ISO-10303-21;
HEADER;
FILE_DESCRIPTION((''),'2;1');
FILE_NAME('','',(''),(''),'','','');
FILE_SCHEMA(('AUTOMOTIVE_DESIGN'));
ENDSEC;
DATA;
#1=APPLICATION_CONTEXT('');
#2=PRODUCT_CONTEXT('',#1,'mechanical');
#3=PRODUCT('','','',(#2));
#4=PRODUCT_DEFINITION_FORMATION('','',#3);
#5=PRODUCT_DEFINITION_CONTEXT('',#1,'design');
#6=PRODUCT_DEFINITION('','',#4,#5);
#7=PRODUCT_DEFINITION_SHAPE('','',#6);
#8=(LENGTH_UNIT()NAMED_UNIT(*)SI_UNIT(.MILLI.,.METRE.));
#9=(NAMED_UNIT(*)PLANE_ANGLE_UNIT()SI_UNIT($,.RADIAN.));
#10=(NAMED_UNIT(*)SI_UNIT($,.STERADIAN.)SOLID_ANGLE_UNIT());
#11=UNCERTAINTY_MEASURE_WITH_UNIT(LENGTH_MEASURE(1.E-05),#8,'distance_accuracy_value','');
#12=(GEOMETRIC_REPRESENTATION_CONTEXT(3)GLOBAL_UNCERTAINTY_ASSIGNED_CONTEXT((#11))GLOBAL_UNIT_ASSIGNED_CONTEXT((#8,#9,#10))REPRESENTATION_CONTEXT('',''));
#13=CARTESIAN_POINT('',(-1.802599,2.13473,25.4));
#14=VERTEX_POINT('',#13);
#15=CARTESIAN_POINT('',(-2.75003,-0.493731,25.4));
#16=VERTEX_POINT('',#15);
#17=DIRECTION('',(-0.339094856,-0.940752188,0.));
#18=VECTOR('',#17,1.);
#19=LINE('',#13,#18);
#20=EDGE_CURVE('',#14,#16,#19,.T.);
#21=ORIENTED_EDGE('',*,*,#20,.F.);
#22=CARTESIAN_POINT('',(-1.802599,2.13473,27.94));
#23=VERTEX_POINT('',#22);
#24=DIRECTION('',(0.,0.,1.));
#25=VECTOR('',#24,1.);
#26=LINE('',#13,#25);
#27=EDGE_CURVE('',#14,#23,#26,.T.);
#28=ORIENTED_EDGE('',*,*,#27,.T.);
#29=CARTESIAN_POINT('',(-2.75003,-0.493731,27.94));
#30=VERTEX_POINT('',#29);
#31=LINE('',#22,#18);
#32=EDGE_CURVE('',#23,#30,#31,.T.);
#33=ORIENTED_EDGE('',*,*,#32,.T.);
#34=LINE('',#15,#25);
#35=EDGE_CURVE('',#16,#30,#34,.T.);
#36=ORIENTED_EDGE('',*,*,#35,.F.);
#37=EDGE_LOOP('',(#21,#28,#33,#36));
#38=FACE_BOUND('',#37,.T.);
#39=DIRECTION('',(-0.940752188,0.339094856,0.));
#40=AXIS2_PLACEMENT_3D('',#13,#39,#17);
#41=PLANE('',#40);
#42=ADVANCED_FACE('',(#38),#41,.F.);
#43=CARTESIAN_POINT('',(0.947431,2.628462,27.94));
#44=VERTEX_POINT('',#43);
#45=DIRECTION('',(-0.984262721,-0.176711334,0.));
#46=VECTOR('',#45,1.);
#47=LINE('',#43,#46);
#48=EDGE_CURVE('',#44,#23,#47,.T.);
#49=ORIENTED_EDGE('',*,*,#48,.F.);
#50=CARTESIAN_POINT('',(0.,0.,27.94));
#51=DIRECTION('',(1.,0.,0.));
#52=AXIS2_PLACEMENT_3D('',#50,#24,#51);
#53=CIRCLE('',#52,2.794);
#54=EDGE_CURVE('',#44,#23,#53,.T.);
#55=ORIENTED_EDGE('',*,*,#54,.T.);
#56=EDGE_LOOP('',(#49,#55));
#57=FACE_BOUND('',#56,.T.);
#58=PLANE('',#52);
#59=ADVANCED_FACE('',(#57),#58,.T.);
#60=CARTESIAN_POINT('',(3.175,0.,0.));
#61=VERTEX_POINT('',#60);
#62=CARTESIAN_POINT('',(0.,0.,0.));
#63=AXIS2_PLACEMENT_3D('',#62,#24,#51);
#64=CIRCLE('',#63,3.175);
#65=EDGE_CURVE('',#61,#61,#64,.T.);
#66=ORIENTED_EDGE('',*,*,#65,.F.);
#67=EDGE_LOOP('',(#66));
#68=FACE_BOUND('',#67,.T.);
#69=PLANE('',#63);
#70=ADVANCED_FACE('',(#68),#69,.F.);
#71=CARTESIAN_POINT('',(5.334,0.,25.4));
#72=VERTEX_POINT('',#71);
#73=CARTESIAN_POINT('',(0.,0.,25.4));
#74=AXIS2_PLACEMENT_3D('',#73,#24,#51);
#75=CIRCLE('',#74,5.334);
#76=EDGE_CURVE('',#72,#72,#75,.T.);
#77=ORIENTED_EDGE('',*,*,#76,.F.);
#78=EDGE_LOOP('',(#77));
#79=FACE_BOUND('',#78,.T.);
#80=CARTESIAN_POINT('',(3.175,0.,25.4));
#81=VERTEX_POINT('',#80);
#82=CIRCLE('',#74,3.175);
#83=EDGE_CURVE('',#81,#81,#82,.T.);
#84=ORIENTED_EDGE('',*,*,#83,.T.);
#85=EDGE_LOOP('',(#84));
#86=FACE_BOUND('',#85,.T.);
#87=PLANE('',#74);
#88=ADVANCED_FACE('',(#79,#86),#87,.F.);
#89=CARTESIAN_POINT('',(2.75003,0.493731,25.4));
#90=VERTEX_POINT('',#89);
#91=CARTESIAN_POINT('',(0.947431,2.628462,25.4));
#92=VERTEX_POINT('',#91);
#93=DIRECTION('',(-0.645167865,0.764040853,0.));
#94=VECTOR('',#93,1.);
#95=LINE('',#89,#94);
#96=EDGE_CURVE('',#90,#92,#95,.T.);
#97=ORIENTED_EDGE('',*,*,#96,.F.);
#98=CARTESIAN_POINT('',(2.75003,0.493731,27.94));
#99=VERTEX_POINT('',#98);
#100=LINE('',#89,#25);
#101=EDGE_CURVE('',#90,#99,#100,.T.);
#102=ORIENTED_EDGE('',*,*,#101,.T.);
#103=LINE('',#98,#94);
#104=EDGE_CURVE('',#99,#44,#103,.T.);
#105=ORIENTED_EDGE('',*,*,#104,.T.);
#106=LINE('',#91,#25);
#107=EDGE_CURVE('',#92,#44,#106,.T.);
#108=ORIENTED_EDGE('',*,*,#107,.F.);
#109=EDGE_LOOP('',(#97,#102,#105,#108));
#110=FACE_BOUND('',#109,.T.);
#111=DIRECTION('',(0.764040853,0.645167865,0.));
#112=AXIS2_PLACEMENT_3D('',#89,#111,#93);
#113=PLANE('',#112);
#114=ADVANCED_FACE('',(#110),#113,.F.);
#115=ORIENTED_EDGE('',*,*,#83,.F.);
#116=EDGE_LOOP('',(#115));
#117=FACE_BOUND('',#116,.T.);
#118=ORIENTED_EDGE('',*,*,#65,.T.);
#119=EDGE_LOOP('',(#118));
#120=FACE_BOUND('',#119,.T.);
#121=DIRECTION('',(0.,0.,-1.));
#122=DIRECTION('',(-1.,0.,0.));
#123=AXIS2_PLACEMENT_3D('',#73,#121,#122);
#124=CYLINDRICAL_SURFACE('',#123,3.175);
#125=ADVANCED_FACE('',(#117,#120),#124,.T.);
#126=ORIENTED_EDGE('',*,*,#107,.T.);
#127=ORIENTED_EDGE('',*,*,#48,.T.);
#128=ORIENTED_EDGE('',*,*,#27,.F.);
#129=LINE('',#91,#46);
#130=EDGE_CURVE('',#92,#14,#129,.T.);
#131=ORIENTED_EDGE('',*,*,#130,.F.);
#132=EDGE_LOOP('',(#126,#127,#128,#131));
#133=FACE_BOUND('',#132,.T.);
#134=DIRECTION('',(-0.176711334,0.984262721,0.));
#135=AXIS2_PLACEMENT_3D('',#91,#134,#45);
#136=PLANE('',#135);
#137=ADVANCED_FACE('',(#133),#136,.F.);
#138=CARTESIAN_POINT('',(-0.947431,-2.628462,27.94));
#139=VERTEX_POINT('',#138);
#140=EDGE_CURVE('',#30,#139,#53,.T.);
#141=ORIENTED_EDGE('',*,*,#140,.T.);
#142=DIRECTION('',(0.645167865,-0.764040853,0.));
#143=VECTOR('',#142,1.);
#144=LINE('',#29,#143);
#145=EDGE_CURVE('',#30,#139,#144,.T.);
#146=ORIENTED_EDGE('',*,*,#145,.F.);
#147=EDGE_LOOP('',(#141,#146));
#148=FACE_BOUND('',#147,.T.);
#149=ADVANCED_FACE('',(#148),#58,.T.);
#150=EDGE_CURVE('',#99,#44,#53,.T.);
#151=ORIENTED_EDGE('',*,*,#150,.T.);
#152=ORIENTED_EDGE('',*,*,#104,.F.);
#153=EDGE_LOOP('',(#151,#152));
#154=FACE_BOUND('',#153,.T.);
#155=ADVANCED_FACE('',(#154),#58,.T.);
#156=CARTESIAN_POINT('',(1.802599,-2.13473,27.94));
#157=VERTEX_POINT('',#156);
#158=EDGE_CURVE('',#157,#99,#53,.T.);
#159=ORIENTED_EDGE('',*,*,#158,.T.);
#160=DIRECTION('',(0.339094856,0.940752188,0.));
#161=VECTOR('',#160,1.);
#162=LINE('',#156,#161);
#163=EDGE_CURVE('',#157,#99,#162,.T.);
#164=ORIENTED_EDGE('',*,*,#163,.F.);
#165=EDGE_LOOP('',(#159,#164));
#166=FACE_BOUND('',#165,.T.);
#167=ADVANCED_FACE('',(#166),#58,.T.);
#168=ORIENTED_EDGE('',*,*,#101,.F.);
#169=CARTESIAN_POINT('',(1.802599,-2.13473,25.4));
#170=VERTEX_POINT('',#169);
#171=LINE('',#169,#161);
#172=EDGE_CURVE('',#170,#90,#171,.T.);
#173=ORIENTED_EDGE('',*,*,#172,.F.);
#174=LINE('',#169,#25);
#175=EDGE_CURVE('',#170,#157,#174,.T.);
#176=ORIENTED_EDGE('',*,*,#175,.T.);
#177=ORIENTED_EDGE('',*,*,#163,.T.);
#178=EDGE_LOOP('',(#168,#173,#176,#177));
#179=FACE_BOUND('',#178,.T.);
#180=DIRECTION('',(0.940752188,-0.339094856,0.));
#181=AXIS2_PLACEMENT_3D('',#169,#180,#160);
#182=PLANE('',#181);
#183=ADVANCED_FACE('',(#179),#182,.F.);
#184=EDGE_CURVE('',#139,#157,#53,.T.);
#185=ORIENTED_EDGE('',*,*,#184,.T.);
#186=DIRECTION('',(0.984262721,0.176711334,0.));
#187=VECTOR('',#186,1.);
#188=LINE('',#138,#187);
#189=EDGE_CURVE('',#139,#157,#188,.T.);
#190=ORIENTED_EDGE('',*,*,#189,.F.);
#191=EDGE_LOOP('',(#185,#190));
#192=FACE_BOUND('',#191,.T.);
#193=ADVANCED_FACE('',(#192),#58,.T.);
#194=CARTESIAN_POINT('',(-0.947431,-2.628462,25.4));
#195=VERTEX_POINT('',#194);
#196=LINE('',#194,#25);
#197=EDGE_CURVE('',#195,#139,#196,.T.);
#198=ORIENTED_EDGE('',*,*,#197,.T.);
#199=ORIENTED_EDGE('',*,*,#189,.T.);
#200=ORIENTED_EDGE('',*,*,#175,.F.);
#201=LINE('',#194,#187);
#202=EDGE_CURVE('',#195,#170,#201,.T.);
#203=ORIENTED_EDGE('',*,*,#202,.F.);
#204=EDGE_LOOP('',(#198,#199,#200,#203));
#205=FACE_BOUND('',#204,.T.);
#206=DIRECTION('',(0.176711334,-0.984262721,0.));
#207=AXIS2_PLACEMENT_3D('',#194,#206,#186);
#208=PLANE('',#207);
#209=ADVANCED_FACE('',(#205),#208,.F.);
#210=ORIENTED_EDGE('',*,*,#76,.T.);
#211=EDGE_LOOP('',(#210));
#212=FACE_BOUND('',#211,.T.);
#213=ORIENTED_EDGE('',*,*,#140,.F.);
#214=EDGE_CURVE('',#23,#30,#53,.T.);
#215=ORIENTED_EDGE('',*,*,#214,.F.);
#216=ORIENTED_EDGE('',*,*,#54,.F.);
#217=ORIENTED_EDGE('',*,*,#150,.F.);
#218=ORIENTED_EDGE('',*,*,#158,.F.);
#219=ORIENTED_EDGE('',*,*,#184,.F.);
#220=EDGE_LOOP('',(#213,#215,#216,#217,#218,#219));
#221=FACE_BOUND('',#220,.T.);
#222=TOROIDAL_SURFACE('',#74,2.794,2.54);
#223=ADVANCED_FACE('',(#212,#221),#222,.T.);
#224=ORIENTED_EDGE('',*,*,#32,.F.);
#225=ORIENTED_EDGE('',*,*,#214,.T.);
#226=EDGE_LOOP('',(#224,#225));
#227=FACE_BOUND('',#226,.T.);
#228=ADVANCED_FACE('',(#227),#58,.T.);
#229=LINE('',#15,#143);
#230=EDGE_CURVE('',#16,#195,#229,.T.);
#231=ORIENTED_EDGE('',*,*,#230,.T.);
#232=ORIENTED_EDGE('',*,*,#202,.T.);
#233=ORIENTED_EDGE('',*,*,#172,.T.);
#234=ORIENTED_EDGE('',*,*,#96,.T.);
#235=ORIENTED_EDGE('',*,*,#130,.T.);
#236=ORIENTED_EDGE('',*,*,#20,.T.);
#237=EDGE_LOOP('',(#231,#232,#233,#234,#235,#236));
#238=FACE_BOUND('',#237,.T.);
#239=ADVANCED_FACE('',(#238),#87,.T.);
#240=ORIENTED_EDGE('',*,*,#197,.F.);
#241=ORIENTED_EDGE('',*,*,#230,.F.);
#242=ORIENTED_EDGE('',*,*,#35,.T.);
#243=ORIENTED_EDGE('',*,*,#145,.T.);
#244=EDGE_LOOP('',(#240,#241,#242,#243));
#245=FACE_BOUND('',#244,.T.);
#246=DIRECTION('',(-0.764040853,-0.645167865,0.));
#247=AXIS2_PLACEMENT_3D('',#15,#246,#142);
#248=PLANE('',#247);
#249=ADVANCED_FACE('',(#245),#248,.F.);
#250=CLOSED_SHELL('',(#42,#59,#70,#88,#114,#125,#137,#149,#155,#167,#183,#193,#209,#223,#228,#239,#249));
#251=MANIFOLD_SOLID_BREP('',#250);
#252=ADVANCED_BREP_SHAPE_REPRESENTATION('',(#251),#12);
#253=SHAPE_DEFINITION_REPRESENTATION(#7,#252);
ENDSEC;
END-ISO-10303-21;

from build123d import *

# Parameters (mm, degrees)
SKETCH1_R           = 3.175
BOSS_EXTRUDE1_DEPTH = 25.4
SKETCH2_R           = 5.334
BOSS_EXTRUDE2_DEPTH = 2.54
FILLET3_R           = 2.54
CUT_EXTRUDE2_DEPTH  = 2.54


with BuildPart() as part:
    # Sketch1 → Boss-Extrude1 (new body)
    with BuildSketch(Plane.XY):
        Circle(SKETCH1_R)
    extrude(amount=BOSS_EXTRUDE1_DEPTH)

    # Sketch2 → Boss-Extrude2 (add)
    with BuildSketch(Plane.XY.offset(25.4)):
        Circle(SKETCH2_R)
    extrude(amount=BOSS_EXTRUDE2_DEPTH)

    # Fillet3
    fillet3_edges = [part.edges().sort_by_distance(p)[0] for p in [
        (-5.334, 0, 27.94),
    ]]
    fillet(fillet3_edges, radius=FILLET3_R - 0.0001)  # a hair under: the kernel refuses the full size

    # Sketch6 → Cut-Extrude2 (cut)
    with BuildSketch(Plane.XY.offset(27.94)):
        Polygon((1.802599016, -2.134730144), (2.750030043, 0.493731468), (0.947431027, 2.628461612), (-1.802599016, 2.134730144), (-2.750030043, -0.493731468), (-0.947431027, -2.628461612), align=None)
    extrude(amount=-CUT_EXTRUDE2_DEPTH, mode=Mode.SUBTRACT)


solid = part.part
